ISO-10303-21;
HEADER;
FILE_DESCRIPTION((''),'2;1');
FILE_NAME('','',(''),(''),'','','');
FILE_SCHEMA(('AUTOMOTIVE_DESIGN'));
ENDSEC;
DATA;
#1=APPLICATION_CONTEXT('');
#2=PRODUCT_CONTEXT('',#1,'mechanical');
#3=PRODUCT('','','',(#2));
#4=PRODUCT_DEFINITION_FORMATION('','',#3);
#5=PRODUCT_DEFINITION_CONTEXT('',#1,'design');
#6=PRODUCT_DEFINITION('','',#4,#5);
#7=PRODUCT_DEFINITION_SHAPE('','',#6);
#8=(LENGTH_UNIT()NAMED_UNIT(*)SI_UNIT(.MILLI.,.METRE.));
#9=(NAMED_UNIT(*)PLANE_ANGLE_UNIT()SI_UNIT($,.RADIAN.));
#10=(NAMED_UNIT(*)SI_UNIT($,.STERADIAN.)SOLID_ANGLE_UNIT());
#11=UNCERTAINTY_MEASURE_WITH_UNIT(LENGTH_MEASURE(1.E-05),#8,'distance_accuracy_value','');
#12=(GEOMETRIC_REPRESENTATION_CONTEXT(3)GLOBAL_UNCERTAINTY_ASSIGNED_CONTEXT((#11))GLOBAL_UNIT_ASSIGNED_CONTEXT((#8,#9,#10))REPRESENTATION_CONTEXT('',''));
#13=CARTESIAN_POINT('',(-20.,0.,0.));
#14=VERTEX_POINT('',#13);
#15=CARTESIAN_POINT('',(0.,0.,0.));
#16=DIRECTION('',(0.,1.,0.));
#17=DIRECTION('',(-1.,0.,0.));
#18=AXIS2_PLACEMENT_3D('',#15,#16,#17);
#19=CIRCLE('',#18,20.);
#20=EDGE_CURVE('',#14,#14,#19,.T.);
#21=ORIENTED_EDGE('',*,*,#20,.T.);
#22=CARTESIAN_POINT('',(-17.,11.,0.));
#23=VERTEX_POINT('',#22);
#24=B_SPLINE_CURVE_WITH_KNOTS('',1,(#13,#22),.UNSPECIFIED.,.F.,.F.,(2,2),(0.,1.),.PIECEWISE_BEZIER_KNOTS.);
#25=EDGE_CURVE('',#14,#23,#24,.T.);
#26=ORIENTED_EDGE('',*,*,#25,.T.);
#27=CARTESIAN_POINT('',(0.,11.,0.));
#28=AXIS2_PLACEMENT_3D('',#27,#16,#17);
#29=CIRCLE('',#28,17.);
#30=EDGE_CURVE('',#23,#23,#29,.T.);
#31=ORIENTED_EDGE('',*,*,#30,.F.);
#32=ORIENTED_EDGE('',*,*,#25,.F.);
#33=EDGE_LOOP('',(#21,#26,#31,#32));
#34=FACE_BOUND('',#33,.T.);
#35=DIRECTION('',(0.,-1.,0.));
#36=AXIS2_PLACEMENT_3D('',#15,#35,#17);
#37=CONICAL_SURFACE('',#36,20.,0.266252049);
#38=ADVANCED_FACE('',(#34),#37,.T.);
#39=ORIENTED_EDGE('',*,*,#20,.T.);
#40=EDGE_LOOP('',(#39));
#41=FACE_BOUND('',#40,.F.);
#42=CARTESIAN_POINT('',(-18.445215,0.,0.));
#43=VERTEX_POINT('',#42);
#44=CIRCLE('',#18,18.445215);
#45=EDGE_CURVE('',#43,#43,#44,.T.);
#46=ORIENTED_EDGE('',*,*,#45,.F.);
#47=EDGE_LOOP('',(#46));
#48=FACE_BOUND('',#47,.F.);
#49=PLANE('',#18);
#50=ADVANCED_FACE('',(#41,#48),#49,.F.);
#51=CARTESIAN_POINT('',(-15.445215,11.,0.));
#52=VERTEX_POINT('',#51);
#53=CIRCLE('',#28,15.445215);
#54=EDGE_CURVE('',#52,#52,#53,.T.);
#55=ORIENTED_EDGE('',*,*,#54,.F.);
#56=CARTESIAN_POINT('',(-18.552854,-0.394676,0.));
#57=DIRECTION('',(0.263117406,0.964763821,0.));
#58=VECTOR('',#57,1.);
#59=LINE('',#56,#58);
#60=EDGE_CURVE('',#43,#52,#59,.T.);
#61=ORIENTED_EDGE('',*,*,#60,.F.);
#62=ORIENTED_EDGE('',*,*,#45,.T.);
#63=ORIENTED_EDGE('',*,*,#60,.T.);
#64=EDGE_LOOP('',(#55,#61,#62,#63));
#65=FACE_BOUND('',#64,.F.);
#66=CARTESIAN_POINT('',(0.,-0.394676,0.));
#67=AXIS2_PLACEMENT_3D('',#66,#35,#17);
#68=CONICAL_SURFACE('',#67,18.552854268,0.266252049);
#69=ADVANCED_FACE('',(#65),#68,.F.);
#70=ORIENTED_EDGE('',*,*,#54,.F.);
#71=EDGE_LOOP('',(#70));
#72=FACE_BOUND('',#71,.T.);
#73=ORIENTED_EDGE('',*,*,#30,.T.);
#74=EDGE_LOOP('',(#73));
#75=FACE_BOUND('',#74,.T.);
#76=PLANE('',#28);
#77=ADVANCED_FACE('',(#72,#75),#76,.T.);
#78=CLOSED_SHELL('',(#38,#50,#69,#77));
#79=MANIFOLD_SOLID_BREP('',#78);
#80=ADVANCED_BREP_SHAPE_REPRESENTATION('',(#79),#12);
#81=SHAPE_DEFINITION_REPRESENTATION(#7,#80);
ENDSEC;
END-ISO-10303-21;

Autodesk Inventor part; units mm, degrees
ref_plane "YZ Plane" through (0, 0, 0) normal (1, 0, 0) x (0, 1, 0)
ref_plane "XY Plane" through (0, 0, 0) normal (0, 0, 1) x (1, 0, 0)
sketch "Szkic6" plane through (0, 0, 0) normal (0, 1, 0) x (-1, 0, 0)
  circle A0 centre (0, 0) radius 20
  dimension "d33" = 40
ref_plane "Płaszczyzna konstrukcyjna1" through (0, 11, 0) normal (0, 1, 0) x (-1, 0, 0)
sketch "Szkic7" plane through (0, 11, 0) normal (0, 1, 0) x (-1, 0, 0)
  circle A0 centre (0, 0) radius 17
  dimension "d35" = 34
loft "Wyciągnięcie złożone1" add profiles "Szkic6", "Szkic7"
shell "Skorupa1" thickness 1.5 removed faces 2 at (6.0401, 11, -5.7878) at (2.364, 0, 6.2334)
equation "\"d33\" = OD1"
equation "\"d35\" = OD2"
equation "\"d52\" = THK"
equation "\"SzerokośćGięciaPodcięcia\" = Grubość"
equation "\"RozmiarPodcięciaNarożnika\" = 4 * Grubość"
equation "\"PromieńPrzejścia\" = PromieńGięcia"
equation "\"Rozmiar_promienia_Jacobiego\" = PromieńGięcia"
equation "\"Wielk_odstępu\" = Grubość"
equation "\"d2\" = PromieńGięcia"
equation "\"d23\" = PromieńGięcia"
equation "\"OD1\" = 40"
equation "\"OD2\" = 34"
equation "\"L\" = 11"
equation "\"THK\" = 1.5"
equation "\"d34\" = L"
equation "\"Grubość\" = 1.5"
equation "\"PromieńGięcia\" = 3"
properties part number "Redukcja symetryczna Ø40x34x1,5 L=11" material "304"
